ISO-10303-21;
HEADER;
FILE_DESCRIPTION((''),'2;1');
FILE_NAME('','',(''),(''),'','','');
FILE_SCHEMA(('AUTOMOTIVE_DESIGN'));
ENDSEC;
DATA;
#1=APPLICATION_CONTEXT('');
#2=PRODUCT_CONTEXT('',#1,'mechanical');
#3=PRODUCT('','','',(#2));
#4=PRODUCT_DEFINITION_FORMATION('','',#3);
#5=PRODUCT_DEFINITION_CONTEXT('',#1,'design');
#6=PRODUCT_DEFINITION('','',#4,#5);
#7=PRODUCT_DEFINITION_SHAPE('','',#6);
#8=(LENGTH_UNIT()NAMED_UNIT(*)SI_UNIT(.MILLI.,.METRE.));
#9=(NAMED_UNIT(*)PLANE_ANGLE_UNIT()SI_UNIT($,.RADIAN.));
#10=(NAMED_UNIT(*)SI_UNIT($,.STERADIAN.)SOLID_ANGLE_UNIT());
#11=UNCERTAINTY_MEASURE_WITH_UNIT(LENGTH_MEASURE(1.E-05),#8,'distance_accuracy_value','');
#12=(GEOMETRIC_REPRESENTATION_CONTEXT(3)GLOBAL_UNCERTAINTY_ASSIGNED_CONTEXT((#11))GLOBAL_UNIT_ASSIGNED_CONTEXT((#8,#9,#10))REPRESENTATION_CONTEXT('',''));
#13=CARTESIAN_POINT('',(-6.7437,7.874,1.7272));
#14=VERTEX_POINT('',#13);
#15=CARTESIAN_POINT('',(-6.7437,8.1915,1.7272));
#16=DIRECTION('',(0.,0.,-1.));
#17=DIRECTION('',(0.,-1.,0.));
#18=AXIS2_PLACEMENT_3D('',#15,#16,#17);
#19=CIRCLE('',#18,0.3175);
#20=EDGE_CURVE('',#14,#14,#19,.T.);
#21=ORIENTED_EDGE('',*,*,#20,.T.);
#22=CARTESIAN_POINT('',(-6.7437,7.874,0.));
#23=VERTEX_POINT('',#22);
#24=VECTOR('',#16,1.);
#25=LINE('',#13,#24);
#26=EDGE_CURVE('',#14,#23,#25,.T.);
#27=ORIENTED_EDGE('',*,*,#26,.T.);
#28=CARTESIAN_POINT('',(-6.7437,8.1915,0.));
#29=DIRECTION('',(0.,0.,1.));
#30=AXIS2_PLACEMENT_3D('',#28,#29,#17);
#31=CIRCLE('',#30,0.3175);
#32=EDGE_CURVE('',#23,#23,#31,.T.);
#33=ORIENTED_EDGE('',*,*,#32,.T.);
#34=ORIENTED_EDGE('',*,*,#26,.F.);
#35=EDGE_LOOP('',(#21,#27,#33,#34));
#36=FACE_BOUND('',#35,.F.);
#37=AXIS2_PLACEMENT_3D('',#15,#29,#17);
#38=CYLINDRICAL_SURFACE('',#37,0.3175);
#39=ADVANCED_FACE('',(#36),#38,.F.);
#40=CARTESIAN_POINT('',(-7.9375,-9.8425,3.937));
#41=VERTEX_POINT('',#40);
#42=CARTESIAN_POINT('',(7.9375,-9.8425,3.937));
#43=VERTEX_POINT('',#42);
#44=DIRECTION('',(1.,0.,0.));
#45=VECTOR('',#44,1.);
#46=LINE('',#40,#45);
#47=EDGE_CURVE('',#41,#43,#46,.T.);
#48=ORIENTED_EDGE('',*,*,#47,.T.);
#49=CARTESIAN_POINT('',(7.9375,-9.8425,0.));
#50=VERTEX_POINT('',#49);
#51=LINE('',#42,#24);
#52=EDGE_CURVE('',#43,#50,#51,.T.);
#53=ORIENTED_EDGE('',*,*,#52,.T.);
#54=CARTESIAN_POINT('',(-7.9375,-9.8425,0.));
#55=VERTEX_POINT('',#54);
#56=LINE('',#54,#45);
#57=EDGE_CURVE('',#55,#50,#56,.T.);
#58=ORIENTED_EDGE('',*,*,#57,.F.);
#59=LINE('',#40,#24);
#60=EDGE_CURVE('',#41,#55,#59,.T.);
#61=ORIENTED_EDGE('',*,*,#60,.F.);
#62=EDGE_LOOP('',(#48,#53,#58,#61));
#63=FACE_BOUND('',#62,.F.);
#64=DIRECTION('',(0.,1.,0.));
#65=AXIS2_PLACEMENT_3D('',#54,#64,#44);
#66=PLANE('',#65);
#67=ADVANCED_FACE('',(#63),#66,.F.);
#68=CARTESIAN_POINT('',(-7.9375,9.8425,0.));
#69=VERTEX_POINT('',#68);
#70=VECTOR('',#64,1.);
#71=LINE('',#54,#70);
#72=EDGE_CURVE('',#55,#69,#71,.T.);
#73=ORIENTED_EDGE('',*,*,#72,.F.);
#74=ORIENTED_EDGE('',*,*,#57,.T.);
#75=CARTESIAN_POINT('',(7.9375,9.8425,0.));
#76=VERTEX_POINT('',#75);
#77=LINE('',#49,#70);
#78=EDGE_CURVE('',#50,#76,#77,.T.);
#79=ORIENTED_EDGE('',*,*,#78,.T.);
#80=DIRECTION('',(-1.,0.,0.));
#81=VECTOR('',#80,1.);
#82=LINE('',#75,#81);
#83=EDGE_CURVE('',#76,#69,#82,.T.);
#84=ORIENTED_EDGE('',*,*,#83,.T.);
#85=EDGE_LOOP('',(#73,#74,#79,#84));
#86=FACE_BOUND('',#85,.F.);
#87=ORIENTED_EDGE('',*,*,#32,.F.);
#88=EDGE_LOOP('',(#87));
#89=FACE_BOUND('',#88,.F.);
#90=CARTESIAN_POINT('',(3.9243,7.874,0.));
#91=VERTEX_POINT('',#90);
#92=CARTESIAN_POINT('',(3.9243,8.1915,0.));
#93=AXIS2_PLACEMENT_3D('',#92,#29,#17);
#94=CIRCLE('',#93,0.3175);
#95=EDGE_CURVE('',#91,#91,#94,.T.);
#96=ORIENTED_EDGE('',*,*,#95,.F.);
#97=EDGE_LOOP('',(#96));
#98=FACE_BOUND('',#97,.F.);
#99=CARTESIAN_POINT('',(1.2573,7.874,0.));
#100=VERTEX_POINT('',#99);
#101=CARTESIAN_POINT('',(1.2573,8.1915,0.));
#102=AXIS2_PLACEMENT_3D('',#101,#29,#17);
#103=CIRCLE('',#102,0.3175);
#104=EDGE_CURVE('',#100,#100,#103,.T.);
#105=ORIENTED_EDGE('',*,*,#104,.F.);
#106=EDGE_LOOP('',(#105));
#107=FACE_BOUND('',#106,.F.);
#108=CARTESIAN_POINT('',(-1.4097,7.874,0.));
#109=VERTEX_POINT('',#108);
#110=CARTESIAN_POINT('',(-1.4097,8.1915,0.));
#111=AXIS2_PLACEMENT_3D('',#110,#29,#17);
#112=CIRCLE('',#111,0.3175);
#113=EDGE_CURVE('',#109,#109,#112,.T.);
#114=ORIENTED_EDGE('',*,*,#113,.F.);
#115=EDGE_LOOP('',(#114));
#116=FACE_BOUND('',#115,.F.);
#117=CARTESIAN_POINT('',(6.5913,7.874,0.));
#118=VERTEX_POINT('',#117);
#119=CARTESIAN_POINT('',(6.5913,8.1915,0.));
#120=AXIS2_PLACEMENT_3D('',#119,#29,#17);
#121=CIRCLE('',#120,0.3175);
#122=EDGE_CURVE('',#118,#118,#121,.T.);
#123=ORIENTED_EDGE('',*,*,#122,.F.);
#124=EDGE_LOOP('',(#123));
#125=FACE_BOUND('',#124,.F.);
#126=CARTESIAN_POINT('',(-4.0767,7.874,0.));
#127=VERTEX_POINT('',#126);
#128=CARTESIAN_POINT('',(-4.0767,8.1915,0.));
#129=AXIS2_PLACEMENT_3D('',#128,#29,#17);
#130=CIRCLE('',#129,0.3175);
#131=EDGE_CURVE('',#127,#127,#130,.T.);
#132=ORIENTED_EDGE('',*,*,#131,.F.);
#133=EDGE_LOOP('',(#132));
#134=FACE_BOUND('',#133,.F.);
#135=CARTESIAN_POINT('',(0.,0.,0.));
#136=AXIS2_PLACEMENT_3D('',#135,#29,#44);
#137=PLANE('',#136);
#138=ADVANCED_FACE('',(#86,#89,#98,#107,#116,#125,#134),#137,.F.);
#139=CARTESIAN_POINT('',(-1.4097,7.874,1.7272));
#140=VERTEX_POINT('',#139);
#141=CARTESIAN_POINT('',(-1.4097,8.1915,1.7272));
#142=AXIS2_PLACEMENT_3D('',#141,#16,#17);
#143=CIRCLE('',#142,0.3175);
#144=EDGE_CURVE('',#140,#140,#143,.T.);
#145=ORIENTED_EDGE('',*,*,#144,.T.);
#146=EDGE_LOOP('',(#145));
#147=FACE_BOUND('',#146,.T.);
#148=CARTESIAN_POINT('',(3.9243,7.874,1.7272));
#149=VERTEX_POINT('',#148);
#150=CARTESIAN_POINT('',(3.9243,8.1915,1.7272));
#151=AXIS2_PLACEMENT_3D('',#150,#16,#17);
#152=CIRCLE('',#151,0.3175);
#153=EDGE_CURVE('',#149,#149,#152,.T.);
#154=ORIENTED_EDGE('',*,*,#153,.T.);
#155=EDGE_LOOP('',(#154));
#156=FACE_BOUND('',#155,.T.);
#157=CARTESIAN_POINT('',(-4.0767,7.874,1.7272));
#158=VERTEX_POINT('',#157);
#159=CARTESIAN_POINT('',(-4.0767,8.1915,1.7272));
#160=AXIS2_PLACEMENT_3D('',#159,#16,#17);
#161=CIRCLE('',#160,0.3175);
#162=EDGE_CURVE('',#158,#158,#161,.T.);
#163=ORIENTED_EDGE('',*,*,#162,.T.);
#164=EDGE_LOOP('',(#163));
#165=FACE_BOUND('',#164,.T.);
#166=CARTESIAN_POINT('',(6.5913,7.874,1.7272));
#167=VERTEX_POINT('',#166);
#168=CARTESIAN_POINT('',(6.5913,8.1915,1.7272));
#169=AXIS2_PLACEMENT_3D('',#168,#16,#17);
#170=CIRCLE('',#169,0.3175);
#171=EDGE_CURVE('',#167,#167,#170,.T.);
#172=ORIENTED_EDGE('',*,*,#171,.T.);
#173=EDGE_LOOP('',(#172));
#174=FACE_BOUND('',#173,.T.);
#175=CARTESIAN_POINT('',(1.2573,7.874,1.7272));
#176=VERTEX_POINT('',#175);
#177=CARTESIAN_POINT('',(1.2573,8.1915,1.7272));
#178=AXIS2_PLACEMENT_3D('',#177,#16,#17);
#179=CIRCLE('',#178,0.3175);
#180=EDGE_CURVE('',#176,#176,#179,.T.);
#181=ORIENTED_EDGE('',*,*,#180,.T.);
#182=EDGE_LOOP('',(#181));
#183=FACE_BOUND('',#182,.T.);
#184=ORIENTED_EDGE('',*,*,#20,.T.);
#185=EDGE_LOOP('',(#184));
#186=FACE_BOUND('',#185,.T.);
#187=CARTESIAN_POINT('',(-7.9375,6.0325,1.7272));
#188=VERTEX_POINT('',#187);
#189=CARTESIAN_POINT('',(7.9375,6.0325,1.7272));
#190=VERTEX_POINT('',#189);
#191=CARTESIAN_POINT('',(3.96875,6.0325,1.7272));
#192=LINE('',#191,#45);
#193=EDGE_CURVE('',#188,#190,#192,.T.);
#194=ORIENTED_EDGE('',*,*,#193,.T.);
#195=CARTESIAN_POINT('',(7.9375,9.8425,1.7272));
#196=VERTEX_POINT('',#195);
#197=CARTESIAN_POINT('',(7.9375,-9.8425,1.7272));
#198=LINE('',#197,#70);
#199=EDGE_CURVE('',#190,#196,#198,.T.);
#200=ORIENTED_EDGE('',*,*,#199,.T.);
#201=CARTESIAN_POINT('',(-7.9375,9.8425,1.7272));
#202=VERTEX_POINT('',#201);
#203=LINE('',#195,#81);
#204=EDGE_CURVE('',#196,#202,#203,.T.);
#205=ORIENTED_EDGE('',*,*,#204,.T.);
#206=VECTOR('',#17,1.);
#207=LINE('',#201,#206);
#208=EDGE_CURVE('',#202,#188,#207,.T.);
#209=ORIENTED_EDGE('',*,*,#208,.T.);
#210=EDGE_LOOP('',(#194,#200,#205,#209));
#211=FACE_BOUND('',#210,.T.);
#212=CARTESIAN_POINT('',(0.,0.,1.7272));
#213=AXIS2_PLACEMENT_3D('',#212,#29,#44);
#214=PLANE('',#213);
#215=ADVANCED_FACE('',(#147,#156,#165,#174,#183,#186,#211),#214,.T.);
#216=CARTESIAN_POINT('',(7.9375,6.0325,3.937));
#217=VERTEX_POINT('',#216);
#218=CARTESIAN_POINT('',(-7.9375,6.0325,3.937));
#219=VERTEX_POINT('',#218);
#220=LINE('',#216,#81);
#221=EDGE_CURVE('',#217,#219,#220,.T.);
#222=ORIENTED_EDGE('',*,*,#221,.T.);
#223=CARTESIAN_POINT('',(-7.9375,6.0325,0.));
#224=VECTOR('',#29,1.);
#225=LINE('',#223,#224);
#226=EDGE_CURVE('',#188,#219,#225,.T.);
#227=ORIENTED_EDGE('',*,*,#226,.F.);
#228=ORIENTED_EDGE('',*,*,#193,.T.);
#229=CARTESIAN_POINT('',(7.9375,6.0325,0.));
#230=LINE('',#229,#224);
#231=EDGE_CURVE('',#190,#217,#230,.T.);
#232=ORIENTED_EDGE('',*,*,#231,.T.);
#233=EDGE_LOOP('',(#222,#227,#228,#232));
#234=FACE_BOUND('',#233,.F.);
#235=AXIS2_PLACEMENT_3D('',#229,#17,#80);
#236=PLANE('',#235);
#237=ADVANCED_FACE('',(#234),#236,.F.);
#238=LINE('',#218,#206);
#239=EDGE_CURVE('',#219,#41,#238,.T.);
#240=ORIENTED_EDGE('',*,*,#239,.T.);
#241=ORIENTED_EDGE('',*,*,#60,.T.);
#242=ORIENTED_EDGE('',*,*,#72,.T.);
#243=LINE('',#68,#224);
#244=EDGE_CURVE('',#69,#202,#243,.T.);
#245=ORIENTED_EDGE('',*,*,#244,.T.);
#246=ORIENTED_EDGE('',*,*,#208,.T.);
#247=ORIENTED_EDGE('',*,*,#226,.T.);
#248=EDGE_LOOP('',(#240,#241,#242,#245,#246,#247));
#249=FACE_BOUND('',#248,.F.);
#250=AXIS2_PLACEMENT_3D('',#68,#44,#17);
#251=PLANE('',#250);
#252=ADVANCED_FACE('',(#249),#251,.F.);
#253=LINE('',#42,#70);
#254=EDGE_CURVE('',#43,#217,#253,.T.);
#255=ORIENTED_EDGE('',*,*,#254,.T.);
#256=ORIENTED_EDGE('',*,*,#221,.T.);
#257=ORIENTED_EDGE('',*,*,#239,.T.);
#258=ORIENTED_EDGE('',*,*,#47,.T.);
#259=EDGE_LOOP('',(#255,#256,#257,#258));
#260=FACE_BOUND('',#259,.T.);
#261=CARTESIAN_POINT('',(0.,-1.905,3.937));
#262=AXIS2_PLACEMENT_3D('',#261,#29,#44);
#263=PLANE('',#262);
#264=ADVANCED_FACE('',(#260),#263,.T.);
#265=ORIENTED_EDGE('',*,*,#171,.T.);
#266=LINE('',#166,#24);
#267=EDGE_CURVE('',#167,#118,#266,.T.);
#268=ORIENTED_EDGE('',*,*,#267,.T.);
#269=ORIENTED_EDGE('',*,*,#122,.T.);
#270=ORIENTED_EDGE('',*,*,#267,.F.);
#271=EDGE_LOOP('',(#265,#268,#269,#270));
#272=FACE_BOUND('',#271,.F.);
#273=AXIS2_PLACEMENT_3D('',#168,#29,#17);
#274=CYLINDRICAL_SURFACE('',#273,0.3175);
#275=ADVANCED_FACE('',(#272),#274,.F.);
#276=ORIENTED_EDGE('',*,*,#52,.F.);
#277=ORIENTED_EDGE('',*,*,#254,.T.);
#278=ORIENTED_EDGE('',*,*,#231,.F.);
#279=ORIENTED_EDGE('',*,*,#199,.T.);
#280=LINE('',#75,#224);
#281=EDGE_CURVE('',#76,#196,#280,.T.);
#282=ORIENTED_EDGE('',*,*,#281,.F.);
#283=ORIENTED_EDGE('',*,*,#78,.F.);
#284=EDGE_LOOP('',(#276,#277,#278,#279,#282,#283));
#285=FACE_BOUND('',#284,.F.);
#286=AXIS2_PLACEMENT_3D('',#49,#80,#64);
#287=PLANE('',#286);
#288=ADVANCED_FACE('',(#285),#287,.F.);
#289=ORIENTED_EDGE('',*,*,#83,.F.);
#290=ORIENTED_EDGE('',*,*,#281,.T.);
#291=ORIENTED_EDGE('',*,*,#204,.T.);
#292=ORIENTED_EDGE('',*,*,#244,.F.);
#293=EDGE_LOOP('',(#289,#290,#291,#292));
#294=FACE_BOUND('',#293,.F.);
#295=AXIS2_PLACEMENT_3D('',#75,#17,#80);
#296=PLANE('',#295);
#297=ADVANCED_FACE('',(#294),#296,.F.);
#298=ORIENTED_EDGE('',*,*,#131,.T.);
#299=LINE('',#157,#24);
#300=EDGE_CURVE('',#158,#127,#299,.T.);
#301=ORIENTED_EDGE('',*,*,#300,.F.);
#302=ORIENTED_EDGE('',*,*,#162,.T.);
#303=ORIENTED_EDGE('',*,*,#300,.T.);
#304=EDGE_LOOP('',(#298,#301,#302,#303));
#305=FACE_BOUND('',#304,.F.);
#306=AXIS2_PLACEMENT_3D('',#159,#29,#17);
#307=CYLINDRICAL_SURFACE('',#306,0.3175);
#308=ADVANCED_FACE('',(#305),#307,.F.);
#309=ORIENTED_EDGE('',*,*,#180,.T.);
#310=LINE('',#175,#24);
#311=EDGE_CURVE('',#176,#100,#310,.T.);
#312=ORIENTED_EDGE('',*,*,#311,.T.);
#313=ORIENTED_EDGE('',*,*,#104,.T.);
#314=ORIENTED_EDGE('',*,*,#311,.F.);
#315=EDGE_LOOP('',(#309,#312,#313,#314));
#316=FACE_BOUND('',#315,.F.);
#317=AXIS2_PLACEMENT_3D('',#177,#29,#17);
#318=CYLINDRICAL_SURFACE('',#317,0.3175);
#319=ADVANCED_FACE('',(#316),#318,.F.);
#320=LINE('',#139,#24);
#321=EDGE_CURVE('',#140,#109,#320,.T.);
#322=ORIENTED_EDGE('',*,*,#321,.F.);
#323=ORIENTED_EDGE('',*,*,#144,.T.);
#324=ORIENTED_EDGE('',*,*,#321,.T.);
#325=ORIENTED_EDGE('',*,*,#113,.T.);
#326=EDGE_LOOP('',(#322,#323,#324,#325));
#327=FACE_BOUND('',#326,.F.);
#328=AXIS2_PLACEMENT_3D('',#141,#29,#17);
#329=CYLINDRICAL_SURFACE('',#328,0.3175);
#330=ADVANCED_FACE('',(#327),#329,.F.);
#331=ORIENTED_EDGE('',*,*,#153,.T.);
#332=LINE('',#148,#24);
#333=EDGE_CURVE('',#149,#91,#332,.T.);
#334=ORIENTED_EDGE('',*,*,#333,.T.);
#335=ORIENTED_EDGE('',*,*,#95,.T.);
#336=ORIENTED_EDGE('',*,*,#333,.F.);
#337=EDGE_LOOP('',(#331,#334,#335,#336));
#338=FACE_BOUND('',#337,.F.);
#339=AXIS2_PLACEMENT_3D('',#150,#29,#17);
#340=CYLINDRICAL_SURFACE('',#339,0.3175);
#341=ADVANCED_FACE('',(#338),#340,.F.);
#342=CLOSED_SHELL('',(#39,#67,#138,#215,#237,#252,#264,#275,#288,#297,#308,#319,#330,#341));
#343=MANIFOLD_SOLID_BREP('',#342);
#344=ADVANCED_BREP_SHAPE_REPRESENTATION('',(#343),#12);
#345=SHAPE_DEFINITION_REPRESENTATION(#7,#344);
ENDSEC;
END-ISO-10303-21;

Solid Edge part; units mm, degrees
sketch "Sketch1" plane through (0, 0, 0) normal (0, 0, 1) x (1, 0, 0)
  line L0 (7.9375, -9.8425) -> (7.9375, 9.8425)
  line L1 (7.9375, 9.8425) -> (-7.9375, 9.8425)
  line L2 (-7.9375, 9.8425) -> (-7.9375, -9.8425)
  line L3 (-7.9375, -9.8425) -> (7.9375, -9.8425)
extrude "Protrusion1" add sketch "Sketch1" along normal blind 1.7272
sketch "Sketch2" plane through (0, 0, 0) normal (0, 0, 1) x (1, 0, 0)
  line L0 (7.9375, 6.0325) -> (-7.9375, 6.0325)
  line L1 (-7.9375, 6.0325) -> (-7.9375, -9.8425)
  line L2 (-7.9375, -9.8425) -> (7.9375, -9.8425)
  line L3 (7.9375, -9.8425) -> (7.9375, 6.0325)
extrude "ExtrudedProtrusion_2" add sketch "Sketch2" along normal blind 3.937
hole "Hole1" at (-6.7437, 8.1915, 1.7272) direction (0, 0, -1) diameter 0.635 end up to next
pattern_linear "Pattern1" count 6 spacing 2.667 along (1, 0, 0) of "Hole1"
